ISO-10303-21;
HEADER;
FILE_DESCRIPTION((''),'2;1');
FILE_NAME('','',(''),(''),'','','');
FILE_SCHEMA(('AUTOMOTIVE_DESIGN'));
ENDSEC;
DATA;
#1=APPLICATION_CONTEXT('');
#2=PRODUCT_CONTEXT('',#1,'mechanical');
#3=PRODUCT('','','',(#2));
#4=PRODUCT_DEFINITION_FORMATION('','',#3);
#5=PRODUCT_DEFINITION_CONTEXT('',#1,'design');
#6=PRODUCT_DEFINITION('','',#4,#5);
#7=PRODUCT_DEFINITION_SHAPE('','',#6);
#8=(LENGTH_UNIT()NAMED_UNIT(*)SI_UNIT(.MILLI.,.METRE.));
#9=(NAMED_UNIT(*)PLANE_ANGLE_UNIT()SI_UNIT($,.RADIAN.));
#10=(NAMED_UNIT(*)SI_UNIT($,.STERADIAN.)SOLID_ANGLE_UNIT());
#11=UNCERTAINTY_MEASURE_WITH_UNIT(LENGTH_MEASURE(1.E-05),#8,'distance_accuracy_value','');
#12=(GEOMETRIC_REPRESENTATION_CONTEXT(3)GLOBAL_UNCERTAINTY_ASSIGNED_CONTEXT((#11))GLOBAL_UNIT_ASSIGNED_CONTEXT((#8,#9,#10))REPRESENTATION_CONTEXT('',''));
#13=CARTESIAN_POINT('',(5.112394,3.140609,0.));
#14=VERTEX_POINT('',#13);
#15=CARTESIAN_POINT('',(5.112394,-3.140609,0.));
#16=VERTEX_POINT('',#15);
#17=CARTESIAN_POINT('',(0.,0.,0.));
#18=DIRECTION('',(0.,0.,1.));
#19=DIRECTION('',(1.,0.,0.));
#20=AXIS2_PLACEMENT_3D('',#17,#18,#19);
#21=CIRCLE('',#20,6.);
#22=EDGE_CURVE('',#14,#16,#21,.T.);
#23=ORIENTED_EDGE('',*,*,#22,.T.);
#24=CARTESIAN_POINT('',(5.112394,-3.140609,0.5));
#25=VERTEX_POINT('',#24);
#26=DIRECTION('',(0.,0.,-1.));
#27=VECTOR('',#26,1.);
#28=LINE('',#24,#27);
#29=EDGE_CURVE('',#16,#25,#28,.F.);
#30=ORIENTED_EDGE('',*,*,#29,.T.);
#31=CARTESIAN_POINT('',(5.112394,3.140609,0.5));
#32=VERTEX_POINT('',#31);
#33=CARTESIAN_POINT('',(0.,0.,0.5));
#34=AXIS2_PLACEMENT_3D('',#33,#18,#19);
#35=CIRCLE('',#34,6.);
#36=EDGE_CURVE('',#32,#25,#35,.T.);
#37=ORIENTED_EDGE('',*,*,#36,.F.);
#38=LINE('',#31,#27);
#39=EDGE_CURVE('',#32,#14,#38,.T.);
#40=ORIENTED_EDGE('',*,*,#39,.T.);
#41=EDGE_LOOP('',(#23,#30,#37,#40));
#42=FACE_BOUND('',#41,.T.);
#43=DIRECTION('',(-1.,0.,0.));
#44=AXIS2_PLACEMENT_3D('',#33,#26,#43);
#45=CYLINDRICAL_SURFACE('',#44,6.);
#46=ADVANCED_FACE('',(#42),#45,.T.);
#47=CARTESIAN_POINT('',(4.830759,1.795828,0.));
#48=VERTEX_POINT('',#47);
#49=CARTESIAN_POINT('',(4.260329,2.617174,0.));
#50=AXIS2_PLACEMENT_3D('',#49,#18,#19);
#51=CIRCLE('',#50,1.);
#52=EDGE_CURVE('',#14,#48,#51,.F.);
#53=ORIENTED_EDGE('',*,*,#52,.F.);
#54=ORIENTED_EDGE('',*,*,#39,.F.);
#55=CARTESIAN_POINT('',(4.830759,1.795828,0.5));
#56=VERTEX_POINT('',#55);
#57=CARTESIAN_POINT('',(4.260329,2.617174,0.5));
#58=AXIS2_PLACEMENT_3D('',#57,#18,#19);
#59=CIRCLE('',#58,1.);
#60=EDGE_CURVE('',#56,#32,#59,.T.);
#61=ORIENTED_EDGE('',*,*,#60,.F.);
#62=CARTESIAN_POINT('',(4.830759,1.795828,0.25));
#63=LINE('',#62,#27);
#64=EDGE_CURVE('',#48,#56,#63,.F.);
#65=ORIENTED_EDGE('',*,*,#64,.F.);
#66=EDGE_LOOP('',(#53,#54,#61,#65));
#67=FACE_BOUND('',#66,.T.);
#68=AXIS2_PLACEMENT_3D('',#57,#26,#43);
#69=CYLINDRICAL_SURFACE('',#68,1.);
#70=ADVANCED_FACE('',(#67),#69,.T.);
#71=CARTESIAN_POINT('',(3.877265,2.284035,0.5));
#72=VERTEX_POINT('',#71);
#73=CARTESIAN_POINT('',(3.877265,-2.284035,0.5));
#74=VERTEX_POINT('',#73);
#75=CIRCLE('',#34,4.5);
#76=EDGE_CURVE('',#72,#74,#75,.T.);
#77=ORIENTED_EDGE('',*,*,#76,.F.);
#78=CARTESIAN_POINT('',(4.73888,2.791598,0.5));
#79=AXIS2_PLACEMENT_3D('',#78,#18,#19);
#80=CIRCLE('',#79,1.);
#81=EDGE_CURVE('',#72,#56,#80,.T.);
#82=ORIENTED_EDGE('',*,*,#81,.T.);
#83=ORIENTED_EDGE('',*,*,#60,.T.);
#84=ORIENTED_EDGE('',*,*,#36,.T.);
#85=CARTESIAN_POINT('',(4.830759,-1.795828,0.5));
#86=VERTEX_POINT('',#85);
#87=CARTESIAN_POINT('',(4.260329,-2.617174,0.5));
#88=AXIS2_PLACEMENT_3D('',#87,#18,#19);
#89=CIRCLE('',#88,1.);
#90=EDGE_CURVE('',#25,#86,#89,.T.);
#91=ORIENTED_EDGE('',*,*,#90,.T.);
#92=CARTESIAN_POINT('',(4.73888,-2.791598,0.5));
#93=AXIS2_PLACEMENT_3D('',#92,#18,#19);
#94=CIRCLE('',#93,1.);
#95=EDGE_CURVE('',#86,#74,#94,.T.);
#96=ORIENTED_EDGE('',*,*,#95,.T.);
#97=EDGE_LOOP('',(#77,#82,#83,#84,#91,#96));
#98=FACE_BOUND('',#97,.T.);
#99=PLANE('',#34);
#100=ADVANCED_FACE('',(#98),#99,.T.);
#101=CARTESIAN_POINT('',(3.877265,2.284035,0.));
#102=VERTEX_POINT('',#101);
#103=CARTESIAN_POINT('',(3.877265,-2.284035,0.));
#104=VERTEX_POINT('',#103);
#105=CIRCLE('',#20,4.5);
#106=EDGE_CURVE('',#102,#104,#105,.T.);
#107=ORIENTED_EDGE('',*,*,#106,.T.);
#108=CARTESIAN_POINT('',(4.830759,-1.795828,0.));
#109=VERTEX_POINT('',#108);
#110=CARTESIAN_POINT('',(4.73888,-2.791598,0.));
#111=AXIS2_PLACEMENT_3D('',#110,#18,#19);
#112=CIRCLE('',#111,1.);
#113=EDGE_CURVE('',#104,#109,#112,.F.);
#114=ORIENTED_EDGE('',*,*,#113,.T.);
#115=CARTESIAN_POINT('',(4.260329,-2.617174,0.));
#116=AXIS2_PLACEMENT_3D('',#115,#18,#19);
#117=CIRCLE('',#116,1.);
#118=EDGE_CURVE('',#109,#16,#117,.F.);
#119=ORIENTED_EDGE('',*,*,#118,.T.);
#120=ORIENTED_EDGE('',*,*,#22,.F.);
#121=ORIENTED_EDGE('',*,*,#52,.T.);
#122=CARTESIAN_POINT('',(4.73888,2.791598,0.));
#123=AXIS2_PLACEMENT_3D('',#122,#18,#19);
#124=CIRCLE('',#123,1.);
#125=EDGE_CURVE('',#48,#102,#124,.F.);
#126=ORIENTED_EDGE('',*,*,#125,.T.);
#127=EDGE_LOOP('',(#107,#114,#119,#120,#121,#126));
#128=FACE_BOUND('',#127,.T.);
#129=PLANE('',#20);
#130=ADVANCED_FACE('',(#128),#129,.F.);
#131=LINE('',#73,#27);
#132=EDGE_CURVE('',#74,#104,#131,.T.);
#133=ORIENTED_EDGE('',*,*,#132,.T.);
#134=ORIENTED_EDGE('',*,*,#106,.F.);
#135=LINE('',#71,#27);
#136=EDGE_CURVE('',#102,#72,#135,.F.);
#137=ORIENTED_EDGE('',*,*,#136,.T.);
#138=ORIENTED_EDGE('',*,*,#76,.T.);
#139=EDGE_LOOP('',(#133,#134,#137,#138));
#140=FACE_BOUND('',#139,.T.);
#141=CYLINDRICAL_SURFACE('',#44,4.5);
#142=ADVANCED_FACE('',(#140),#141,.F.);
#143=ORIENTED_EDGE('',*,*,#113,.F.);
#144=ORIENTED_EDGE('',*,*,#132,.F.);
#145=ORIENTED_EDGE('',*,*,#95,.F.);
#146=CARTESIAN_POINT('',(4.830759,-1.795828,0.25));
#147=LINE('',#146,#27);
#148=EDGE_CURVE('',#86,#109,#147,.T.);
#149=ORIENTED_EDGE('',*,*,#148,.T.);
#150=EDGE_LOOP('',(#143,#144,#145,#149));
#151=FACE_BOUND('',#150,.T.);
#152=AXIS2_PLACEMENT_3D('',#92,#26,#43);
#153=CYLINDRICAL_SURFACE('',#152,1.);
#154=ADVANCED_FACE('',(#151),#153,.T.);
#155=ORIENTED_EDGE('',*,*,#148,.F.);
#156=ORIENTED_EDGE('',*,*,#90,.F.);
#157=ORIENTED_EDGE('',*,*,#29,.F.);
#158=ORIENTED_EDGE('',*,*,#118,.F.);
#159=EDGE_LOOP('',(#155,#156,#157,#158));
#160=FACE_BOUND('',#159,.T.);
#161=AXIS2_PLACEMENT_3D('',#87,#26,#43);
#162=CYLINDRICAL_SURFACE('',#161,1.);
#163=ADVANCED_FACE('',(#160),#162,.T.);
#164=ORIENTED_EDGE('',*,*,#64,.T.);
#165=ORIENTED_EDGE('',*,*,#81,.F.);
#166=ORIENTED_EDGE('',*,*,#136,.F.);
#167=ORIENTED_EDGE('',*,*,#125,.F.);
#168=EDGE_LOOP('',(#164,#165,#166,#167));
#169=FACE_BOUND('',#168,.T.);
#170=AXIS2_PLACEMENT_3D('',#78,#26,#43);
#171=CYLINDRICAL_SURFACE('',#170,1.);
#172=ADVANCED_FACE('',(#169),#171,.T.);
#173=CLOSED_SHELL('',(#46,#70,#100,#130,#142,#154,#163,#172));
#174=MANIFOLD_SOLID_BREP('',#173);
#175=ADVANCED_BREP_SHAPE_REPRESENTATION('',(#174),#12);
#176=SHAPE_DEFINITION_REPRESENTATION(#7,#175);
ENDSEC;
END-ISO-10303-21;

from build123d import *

# Parameters (mm, degrees)
SKETCH1_R           = 6
SKETCH1_R_2         = 4.5
BOSS_EXTRUDE1_DEPTH = 0.5
CUT_EXTRUDE1_START  = -0.5
CUT_EXTRUDE1_DEPTH  = 0.5
FILLET1_R           = 1


with BuildPart() as part:
    # Sketch1 → Boss-Extrude1 (new body)
    with BuildSketch(Plane.XY):
        Circle(SKETCH1_R)
        Circle(SKETCH1_R_2, mode=Mode.SUBTRACT)
    extrude(amount=BOSS_EXTRUDE1_DEPTH)

    # Sketch2 → Cut-Extrude1 (cut)
    with BuildSketch(Plane.XY.offset(0.5).offset(CUT_EXTRUDE1_START)):
        with BuildLine():
            Line((5.637224766, 2.054676846), (4.227918574, 1.541007634))
            ThreePointArc((4.227918574, 1.541007634), (4.431457637, 0.782421375), (4.5, 0))
            ThreePointArc((4.5, 0), (4.431457637, -0.782421375), (4.227918574, -1.541007634))
            Line((4.227918574, -1.541007634), (5.637224766, -2.054676846))
            ThreePointArc((5.637224766, -2.054676846), (5.908610183, -1.0432285), (6, 0))
            ThreePointArc((6, 0), (5.908610183, 1.0432285), (5.637224766, 2.054676846))
        make_face()
    extrude(amount=CUT_EXTRUDE1_DEPTH, mode=Mode.SUBTRACT)

    # Fillet1
    # the kernel refuses this fillet: 1 mm, written as the material it takes off along each edge
    with BuildSketch(Plane(origin=(4.227918574, -1.541007634, -2.270817283), x_dir=(0.9395374609645726, -0.3424461409393371, 0), z_dir=(0, 0, 1))) as fillet1_piece_1:
        with BuildLine():
            CenterArc((0.908326913, -1), FILLET1_R, 90, 79.524318304)
            ThreePointArc((-0.075005253, -0.818181818), (-0.018790545, -0.410806303), (0, 0))
            Line((0, 0), (0.908326913, 0))
        make_face()
    extrude(amount=5.041634566, mode=Mode.SUBTRACT)
    with BuildSketch(Plane(origin=(5.637224766, -2.054676846, -3.01526886), x_dir=(-0.4351439810441928, -0.9003608808477915, 0), z_dir=(0, 0, 1))) as fillet1_piece_2:
        with BuildLine():
            CenterArc((1.105598582, -0.994936153), FILLET1_R, 84.231520484, 101.536959033)
            Line((0.110662429, -1.095445115), (0, 0))
            ThreePointArc((0, 0), (0.603053772, 0.030383082), (1.206107544, 0))
        make_face()
    extrude(amount=6.53053772, mode=Mode.SUBTRACT)
    with BuildSketch(Plane(origin=(4.227918574, 1.541007634, -2.270817283), x_dir=(0.9395374609645728, 0.3424461409393367, 0), z_dir=(0, 0, 1))) as fillet1_piece_3:
        with BuildLine():
            CenterArc((0.908326913, 1), FILLET1_R, 190.475681696, 79.524318304)
            ThreePointArc((-0.075005253, 0.818181818), (-0.018790545, 0.410806303), (0, 0))
            Line((0, 0), (0.908326913, 0))
        make_face()
    extrude(amount=5.041634566, mode=Mode.SUBTRACT)
    with BuildSketch(Plane(origin=(5.637224766, 2.054676846, -3.01526886), x_dir=(-0.43514398104419194, 0.9003608808477921, 0), z_dir=(0, 0, 1))) as fillet1_piece_4:
        with BuildLine():
            CenterArc((1.105598582, 0.994936153), FILLET1_R, 174.231520484, 101.536959033)
            Line((0.110662429, 1.095445115), (0, 0))
            ThreePointArc((0, 0), (0.603053772, -0.030383082), (1.206107544, 0))
        make_face()
    extrude(amount=6.53053772, mode=Mode.SUBTRACT)


solid = part.part
